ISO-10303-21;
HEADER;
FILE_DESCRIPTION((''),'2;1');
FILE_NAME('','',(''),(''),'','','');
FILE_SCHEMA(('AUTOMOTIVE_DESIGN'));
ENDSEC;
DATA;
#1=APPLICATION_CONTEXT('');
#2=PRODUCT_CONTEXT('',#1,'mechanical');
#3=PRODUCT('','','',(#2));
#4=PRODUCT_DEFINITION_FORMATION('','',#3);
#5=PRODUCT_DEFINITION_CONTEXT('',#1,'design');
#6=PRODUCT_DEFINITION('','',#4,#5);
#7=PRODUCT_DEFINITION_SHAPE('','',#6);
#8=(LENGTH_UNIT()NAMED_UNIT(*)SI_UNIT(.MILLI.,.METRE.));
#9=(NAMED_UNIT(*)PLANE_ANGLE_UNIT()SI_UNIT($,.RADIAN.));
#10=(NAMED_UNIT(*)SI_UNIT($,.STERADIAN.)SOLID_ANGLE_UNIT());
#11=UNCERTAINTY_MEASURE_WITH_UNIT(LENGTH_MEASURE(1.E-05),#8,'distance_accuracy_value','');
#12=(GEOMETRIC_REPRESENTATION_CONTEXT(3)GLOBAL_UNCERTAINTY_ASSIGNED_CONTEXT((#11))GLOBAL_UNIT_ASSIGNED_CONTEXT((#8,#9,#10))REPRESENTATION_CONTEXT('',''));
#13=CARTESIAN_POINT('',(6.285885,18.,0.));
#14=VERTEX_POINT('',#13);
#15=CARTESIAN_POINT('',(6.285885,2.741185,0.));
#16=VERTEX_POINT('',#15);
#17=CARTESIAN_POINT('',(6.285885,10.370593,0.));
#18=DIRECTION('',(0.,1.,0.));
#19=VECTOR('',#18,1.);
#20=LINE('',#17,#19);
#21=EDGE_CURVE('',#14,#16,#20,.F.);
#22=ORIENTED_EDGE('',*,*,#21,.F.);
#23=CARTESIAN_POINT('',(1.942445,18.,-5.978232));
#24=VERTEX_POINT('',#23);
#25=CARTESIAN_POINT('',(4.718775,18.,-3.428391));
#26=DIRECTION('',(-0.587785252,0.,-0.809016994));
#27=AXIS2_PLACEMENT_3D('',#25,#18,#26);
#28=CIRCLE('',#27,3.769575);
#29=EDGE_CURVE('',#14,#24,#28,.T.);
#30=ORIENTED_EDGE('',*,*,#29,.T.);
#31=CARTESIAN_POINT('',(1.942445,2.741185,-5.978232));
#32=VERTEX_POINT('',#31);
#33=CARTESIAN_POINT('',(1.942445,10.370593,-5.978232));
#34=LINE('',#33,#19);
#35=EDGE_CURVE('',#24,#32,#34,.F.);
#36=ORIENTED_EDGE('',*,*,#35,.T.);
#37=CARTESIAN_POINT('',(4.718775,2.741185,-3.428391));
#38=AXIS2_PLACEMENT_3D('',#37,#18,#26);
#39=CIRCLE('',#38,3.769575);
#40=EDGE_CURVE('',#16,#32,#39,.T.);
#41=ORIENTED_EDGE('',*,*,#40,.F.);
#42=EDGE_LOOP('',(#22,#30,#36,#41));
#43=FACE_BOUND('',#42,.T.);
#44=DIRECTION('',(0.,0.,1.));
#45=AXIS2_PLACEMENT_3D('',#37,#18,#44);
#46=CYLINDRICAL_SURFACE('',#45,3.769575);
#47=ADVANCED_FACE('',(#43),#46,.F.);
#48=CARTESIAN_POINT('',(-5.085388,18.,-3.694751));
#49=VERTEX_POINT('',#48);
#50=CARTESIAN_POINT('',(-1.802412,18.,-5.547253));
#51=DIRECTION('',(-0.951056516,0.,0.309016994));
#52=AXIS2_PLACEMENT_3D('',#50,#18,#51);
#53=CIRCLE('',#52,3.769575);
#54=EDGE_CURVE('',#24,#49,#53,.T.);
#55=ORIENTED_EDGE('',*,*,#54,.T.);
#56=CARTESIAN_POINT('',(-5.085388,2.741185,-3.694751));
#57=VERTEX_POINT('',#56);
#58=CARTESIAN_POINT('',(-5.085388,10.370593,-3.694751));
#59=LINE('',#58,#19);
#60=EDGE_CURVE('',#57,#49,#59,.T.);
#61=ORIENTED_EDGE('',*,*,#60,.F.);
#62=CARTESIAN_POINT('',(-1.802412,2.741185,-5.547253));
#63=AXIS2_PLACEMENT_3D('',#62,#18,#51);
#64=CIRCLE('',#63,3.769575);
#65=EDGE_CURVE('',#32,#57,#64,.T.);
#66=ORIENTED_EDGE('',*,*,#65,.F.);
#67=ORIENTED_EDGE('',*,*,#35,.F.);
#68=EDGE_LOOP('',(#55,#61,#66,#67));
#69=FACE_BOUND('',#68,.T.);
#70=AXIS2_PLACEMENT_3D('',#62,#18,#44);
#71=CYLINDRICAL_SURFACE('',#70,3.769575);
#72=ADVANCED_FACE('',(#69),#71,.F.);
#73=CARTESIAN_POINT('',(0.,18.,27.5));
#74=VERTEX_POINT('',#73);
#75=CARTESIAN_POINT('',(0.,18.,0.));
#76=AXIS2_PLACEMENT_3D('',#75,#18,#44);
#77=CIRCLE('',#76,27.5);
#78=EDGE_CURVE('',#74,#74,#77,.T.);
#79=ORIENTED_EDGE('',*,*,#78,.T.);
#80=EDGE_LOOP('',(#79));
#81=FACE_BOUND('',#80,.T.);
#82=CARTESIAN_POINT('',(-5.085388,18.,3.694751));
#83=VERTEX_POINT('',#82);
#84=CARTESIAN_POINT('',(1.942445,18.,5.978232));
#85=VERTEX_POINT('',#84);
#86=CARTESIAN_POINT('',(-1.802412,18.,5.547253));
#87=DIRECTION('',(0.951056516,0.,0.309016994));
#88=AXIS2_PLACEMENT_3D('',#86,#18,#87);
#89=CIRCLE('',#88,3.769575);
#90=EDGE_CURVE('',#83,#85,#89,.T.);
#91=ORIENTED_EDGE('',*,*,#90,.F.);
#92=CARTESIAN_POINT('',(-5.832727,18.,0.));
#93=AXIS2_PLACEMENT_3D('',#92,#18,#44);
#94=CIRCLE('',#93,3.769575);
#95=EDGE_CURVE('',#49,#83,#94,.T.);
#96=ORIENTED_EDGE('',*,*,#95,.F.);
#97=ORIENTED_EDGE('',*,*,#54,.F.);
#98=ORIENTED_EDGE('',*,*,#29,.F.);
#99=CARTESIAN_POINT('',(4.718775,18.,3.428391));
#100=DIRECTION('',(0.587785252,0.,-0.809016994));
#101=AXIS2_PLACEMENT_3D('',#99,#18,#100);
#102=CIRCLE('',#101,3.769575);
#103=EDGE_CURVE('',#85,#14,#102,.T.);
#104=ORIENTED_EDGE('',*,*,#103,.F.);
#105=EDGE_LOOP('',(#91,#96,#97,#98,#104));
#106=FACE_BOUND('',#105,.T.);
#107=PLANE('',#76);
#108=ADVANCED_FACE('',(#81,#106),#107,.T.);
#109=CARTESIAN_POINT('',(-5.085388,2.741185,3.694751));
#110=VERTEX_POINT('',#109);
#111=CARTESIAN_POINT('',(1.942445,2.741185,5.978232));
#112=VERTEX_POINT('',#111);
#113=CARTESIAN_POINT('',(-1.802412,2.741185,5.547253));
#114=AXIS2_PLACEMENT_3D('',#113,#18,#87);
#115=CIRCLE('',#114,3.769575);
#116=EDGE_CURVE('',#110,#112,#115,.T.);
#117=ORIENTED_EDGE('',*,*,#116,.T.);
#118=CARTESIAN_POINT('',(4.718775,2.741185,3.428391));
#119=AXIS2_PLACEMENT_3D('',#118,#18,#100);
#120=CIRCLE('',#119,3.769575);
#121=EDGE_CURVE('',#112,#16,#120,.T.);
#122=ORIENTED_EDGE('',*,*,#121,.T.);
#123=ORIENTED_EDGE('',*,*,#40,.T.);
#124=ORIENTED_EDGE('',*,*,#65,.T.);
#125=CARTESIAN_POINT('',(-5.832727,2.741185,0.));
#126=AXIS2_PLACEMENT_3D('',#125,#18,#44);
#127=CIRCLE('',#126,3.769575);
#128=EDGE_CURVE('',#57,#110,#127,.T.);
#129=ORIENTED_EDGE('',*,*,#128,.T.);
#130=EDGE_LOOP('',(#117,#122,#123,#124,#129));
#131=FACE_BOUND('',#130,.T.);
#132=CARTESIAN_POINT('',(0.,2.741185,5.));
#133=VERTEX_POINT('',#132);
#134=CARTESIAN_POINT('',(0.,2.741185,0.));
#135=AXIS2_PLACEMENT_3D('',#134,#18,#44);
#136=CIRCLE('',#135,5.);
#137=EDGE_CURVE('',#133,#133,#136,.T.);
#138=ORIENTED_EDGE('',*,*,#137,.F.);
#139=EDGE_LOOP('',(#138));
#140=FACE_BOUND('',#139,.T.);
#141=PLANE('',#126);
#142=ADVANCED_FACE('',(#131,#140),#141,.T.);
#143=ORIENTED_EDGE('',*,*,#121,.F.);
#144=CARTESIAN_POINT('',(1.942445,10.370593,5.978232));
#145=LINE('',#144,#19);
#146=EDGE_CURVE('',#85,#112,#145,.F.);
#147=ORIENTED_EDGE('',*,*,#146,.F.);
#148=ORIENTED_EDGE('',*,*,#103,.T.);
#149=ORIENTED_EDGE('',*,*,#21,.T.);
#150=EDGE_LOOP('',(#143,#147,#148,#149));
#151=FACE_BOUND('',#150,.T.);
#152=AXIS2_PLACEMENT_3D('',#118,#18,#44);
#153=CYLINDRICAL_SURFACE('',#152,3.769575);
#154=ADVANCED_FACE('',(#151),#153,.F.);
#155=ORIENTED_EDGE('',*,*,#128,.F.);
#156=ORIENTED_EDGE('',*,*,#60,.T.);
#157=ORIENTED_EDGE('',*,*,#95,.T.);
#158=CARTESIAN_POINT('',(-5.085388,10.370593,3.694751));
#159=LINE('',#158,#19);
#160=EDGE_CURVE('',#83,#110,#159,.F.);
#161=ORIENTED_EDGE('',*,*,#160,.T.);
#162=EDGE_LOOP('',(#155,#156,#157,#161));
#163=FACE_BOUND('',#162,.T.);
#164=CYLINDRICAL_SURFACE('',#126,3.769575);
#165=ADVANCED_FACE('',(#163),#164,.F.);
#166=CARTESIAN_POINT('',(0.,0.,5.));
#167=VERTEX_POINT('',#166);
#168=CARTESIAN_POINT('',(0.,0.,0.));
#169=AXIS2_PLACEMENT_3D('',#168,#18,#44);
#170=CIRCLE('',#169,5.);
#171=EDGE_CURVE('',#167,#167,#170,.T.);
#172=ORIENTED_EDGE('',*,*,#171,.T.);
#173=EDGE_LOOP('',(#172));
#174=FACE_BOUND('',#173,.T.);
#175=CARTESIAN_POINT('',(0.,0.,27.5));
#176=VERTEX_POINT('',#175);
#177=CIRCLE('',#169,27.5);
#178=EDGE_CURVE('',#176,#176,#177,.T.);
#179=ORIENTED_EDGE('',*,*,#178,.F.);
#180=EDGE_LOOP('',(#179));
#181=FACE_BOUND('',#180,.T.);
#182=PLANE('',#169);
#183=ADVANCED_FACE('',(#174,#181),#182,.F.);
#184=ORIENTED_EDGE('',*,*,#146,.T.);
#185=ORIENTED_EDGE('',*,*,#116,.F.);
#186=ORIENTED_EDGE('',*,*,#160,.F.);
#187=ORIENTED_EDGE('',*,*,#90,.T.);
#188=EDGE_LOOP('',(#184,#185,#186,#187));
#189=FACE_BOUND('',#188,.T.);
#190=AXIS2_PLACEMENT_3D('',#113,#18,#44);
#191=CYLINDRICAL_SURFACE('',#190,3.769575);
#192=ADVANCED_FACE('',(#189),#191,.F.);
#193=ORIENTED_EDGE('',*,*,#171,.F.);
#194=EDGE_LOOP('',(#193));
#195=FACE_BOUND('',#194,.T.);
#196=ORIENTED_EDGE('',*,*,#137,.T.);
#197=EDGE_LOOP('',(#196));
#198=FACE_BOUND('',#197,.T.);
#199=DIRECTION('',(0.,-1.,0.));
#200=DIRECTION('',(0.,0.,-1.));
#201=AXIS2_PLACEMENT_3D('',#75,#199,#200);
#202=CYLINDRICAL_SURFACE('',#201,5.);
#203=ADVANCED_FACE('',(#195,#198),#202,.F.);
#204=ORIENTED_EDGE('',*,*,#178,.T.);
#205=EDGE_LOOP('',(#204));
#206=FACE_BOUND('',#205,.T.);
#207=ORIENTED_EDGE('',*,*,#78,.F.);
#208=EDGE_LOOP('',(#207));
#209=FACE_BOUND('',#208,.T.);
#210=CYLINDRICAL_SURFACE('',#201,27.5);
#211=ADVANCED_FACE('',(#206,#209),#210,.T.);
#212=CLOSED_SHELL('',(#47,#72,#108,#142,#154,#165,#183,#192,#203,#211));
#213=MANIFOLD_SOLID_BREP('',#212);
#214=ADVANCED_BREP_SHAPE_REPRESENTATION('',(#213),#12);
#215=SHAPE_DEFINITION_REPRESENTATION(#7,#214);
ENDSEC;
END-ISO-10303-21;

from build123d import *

# Parameters (mm, degrees)
SKETCH1_R           = 27.5
BOSS_EXTRUDE1_DEPTH = 18
SKETCH2_R           = 5
CUT_EXTRUDE1_DEPTH  = 43.854404674
SKETCH3_R           = 3.769575295
CUT_EXTRUDE2_DEPTH  = 15.258814729
CIRPATTERN1_COUNT   = 5


with BuildPart() as part:
    # Sketch1 → Boss-Extrude1 (new body)
    with BuildSketch(Plane(origin=(0, 0, 0), x_dir=(1, 0, 0), z_dir=(0, 1, 0))):
        Circle(SKETCH1_R)
    extrude(amount=BOSS_EXTRUDE1_DEPTH)

    # Sketch2 → Cut-Extrude1 (cut, through all)
    with BuildSketch(Plane(origin=(0, 0, 0), x_dir=(1, 0, 0), z_dir=(0, 1, 0))):
        Circle(SKETCH2_R)
    extrude(amount=CUT_EXTRUDE1_DEPTH, mode=Mode.SUBTRACT)

    # Sketch3 → Cut-Extrude2 (cut)
    with BuildSketch(Plane(origin=(0, 18, 0), x_dir=(1, 0, 0), z_dir=(0, 1, 0))):
        with Locations((-5.832726886, 0)):
            Circle(SKETCH3_R)
    cut_extrude2 = extrude(amount=-CUT_EXTRUDE2_DEPTH, mode=Mode.SUBTRACT)

    # CirPattern1: Cut-Extrude2 ×5 about axis
    cirpattern1_axis = Axis((0, 0, 0), (0, 1, 0))
    for i in range(1, CIRPATTERN1_COUNT):
        add(cut_extrude2.rotate(cirpattern1_axis, i * 360 / CIRPATTERN1_COUNT), mode=Mode.SUBTRACT)


solid = part.part
